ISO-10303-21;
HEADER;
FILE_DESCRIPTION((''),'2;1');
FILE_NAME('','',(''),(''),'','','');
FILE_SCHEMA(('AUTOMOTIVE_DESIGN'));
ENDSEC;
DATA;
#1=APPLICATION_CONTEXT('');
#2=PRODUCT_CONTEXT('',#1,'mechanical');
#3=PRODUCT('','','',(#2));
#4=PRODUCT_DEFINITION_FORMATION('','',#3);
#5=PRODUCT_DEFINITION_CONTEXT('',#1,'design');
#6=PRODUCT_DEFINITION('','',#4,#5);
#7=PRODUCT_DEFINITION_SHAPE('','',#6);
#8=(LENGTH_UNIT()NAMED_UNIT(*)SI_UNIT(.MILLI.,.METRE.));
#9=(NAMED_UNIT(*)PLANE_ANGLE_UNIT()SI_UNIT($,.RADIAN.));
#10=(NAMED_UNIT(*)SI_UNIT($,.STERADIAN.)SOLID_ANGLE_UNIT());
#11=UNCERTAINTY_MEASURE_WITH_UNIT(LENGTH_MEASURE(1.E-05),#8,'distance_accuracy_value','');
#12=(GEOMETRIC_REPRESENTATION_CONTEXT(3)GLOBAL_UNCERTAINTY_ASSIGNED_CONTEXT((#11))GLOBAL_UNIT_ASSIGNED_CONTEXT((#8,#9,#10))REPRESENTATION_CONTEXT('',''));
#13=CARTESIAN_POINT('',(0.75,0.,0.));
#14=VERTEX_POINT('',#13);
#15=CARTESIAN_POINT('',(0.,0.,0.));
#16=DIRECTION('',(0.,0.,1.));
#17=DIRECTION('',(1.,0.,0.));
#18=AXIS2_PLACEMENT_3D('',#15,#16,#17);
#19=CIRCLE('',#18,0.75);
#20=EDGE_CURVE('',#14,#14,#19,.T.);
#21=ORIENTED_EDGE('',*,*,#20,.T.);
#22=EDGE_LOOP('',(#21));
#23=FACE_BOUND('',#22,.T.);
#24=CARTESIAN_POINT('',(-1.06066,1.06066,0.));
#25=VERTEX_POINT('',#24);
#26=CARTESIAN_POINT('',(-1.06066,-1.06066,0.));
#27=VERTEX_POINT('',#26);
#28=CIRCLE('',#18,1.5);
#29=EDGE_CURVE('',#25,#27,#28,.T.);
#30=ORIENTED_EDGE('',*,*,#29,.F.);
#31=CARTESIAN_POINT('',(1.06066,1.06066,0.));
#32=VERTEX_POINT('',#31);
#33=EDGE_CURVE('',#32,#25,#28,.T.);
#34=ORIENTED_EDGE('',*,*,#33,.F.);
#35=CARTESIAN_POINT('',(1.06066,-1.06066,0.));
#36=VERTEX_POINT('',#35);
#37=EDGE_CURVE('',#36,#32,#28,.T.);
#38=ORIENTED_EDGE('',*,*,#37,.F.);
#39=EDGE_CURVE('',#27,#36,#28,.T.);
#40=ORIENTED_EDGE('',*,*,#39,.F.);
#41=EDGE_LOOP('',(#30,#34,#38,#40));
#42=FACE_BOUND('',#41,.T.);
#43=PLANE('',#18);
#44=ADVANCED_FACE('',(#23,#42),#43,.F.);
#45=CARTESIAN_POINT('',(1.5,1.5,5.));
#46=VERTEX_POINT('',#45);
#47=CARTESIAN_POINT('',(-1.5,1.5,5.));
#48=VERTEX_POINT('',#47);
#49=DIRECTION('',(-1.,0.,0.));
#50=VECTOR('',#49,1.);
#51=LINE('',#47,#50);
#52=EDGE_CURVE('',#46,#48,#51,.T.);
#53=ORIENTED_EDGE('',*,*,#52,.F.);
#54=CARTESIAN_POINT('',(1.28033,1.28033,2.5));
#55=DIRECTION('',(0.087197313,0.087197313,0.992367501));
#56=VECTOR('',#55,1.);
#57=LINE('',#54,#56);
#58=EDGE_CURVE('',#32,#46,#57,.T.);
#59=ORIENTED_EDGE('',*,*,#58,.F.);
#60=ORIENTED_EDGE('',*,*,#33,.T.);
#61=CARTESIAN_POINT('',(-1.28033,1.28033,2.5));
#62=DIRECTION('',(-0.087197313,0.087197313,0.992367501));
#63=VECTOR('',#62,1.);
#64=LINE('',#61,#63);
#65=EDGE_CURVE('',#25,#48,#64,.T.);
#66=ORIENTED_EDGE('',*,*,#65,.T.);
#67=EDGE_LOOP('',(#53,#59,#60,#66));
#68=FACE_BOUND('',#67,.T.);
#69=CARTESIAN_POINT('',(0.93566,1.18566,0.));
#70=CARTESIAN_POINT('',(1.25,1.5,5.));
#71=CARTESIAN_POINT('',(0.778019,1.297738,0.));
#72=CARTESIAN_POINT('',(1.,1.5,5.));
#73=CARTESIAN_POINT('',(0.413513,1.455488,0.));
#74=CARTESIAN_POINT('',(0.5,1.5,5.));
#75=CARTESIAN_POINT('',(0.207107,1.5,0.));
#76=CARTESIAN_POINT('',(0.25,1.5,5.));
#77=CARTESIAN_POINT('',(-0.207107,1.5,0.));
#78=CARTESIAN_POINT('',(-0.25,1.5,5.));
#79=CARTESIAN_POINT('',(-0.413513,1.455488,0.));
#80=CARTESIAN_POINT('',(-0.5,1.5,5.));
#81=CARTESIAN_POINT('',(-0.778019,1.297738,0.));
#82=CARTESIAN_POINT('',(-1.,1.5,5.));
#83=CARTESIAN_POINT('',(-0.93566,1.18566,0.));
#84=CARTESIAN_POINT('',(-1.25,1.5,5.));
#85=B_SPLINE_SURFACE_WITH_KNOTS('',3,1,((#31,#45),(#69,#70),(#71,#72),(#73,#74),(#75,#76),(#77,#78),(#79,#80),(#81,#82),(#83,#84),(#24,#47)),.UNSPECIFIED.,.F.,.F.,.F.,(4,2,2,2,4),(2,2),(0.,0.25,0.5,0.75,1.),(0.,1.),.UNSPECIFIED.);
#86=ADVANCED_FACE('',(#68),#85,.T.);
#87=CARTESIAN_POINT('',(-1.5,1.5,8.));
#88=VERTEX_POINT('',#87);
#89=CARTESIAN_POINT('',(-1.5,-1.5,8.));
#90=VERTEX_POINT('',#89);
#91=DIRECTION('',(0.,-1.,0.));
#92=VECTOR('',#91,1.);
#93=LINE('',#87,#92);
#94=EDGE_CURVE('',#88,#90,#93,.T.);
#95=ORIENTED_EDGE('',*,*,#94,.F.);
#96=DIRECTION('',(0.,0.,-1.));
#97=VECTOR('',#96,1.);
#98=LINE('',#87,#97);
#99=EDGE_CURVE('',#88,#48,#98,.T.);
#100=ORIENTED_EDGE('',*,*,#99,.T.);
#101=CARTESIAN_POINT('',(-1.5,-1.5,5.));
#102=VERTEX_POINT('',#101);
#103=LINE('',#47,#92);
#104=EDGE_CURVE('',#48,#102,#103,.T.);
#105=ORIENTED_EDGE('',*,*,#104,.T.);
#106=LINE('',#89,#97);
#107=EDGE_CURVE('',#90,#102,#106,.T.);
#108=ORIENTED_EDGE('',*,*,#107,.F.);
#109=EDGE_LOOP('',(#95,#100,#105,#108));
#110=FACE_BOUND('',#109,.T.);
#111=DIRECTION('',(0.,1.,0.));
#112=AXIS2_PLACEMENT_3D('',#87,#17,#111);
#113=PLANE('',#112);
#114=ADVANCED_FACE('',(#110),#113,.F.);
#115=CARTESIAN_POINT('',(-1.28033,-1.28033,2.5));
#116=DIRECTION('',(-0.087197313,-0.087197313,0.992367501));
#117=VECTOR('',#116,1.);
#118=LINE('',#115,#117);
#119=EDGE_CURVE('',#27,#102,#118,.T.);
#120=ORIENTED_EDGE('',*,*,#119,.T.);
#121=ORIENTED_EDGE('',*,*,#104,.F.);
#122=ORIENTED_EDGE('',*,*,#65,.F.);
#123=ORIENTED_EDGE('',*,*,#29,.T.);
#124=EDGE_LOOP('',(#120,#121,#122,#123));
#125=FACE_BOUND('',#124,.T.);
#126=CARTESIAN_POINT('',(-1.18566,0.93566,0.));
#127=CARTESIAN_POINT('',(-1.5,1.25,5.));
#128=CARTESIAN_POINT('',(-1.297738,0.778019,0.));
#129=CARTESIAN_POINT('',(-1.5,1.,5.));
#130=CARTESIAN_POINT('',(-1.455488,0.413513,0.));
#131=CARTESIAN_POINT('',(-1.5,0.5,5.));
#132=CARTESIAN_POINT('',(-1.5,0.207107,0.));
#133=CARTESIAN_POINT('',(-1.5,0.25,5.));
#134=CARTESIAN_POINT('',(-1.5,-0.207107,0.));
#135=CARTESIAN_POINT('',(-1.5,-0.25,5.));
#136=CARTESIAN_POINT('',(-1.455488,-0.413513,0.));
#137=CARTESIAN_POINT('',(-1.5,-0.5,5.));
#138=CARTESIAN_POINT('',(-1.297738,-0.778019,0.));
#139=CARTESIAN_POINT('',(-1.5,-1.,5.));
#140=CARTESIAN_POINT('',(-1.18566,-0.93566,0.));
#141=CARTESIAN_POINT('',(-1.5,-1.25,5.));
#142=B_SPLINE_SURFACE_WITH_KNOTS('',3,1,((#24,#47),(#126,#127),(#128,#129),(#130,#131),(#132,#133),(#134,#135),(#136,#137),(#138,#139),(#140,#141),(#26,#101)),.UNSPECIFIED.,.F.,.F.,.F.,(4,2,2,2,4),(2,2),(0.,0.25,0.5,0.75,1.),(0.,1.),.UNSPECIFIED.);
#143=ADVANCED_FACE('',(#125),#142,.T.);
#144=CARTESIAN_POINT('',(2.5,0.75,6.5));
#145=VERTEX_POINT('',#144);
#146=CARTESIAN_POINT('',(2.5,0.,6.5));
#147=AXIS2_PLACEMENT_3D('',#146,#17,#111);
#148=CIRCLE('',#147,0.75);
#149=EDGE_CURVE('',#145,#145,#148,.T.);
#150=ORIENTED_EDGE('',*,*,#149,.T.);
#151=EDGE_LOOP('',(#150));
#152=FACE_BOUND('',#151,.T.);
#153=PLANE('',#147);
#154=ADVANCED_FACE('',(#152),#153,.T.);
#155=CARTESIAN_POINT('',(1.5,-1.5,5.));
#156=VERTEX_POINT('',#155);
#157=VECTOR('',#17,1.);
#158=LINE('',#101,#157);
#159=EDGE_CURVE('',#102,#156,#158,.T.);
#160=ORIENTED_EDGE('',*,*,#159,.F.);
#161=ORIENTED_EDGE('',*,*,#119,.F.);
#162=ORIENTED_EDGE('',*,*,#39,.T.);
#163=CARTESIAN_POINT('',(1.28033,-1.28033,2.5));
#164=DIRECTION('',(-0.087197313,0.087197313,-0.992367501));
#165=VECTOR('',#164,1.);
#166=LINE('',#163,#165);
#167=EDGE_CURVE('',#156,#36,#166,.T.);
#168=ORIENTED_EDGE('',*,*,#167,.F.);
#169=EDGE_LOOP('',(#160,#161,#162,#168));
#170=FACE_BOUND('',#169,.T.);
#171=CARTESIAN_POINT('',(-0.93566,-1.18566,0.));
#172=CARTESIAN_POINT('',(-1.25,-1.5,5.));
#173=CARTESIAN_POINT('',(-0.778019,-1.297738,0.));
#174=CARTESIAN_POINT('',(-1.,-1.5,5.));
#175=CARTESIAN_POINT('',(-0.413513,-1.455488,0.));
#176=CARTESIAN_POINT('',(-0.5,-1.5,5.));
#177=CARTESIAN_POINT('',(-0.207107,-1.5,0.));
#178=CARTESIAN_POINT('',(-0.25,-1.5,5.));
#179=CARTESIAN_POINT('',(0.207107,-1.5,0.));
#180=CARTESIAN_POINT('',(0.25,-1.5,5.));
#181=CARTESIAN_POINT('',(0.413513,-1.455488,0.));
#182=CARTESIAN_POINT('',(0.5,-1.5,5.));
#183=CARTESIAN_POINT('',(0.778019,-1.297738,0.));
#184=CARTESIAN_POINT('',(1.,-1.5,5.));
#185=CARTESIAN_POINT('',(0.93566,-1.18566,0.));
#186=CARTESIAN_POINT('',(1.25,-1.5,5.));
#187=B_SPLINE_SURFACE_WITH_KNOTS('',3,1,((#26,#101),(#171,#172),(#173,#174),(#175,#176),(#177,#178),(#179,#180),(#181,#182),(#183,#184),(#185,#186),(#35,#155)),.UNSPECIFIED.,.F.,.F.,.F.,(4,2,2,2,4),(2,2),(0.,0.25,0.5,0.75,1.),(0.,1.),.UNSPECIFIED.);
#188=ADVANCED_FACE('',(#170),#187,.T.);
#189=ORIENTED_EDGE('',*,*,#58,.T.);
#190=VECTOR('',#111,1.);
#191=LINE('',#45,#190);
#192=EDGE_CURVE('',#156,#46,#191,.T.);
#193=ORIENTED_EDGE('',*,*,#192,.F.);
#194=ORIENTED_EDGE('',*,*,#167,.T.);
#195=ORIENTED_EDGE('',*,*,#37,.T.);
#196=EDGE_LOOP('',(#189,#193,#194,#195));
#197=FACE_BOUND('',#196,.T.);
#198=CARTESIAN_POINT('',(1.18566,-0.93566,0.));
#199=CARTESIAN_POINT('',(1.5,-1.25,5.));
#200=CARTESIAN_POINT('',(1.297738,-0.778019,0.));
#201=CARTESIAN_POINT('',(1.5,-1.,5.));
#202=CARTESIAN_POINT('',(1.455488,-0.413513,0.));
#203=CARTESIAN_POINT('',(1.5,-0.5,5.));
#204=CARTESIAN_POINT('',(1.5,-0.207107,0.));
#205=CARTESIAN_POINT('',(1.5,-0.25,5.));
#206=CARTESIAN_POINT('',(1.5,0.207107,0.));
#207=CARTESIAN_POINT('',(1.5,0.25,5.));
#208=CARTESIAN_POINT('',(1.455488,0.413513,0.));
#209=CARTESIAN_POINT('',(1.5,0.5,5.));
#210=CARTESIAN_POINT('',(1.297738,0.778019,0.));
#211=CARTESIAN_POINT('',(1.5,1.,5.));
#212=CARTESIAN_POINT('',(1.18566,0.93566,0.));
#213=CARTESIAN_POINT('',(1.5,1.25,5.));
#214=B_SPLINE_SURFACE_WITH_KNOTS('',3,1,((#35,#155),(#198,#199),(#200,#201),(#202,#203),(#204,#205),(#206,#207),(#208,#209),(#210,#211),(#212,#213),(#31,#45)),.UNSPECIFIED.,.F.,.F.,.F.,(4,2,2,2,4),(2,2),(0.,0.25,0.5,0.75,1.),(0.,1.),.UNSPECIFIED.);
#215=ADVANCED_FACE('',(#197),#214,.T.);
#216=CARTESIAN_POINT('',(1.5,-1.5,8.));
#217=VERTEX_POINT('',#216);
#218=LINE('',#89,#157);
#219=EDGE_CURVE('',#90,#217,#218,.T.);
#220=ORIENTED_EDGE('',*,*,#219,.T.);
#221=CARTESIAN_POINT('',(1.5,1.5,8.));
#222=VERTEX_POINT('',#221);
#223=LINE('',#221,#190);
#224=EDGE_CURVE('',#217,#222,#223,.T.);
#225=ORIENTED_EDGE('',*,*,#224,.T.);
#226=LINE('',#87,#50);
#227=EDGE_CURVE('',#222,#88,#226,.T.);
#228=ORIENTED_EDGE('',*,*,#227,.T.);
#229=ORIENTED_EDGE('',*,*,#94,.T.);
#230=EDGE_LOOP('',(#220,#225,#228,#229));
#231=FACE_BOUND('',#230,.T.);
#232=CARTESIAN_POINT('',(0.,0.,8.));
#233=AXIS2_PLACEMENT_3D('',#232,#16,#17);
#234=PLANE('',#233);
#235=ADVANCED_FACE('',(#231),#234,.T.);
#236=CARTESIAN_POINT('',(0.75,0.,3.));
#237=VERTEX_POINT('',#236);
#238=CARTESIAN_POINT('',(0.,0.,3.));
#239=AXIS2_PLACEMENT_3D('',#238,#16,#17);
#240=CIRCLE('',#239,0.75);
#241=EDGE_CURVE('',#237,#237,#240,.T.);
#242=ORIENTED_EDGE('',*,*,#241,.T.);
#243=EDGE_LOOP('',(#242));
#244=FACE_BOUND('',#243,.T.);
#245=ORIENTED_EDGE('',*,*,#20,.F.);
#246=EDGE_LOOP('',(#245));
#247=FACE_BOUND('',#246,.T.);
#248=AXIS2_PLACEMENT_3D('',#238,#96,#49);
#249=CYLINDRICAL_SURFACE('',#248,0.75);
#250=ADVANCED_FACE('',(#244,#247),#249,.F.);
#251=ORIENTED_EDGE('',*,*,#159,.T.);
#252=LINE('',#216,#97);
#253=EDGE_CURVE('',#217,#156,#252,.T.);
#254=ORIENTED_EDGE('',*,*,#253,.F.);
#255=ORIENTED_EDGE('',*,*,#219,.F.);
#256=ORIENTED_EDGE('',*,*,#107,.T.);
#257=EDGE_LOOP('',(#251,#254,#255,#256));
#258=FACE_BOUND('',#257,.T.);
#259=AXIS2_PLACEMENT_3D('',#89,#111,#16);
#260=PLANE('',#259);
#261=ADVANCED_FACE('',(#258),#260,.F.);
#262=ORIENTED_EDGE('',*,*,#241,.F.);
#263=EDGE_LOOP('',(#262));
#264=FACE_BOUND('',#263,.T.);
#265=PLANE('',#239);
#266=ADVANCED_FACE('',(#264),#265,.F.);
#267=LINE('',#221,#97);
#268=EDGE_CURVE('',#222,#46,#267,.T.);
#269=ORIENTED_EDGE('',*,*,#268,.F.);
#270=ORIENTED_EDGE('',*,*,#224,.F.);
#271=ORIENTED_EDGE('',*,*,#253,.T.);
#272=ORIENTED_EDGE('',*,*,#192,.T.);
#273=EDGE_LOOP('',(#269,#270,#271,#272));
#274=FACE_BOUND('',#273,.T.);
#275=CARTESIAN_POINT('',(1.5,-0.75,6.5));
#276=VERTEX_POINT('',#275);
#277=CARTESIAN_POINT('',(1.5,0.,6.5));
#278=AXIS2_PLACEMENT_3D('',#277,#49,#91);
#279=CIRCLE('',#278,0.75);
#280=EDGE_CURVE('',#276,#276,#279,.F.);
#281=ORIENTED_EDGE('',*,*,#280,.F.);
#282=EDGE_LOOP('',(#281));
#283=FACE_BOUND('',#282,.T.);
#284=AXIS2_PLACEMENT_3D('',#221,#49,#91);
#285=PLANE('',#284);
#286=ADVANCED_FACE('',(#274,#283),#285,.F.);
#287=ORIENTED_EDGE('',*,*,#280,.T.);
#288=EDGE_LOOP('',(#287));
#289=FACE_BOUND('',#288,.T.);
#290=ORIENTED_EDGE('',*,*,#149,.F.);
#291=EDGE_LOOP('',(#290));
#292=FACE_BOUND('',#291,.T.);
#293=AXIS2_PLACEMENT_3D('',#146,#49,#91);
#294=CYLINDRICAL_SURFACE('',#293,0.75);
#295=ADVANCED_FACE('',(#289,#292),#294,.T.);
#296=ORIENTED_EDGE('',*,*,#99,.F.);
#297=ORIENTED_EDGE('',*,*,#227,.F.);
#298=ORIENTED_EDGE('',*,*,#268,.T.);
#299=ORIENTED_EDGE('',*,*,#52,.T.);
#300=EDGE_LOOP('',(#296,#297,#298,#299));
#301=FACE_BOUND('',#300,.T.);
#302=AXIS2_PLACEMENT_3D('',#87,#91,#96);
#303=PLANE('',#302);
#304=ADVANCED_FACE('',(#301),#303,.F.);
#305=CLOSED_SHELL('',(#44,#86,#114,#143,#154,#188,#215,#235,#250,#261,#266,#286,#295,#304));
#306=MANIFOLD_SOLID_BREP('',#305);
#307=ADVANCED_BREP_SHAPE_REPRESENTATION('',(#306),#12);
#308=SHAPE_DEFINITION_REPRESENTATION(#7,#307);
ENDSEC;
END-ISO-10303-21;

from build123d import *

# Parameters (mm, degrees)
SKETCH1_8_R         = 0.75
CUT_EXTRUDE3_DEPTH  = 3
SKETCH3_2_W         = 3
SKETCH3_2_H         = 3
BOSS_EXTRUDE3_DEPTH = 3
SKETCH5_R           = 0.75
BOSS_EXTRUDE4_DEPTH = 1


with BuildPart() as part:
    # Loft2: read off the stored shape, not the designer's step
    # Loft2: loft between two sections, ruled curve by curve
    loft2_from = [
        Edge.make_bspline([(1.060660172, -1.060660172, 0), (1.185660172, -0.935660172, 0), (1.297737894, -0.778019164, 0), (1.45548774, -0.413512879, 0), (1.5, -0.207106781, 0), (1.5, 0.207106781, 0), (1.45548774, 0.413512879, 0), (1.297737894, 0.778019164, 0), (1.185660172, 0.935660172, 0), (1.060660172, 1.060660172, 0)], [0, 0, 0, 0, 0.25, 0.25, 0.5, 0.5, 0.75, 0.75, 1, 1, 1, 1], 3),
        Edge.make_bspline([(1.060660172, 1.060660172, 0), (0.935660172, 1.185660172, 0), (0.778019164, 1.297737894, 0), (0.413512879, 1.45548774, 0), (0.207106781, 1.5, 0), (-0.207106781, 1.5, 0), (-0.413512879, 1.45548774, 0), (-0.778019164, 1.297737894, 0), (-0.935660172, 1.185660172, 0), (-1.060660172, 1.060660172, 0)], [0, 0, 0, 0, 0.25, 0.25, 0.5, 0.5, 0.75, 0.75, 1, 1, 1, 1], 3),
        Edge.make_bspline([(-1.060660172, -1.060660172, 0), (-0.935660172, -1.185660172, 0), (-0.778019164, -1.297737894, 0), (-0.413512879, -1.45548774, 0), (-0.207106781, -1.5, 0), (0.207106781, -1.5, 0), (0.413512879, -1.45548774, 0), (0.778019164, -1.297737894, 0), (0.935660172, -1.185660172, 0), (1.060660172, -1.060660172, 0)], [0, 0, 0, 0, 0.25, 0.25, 0.5, 0.5, 0.75, 0.75, 1, 1, 1, 1], 3),
        Edge.make_bspline([(-1.060660172, 1.060660172, 0), (-1.185660172, 0.935660172, 0), (-1.297737894, 0.778019164, 0), (-1.45548774, 0.413512879, 0), (-1.5, 0.207106781, 0), (-1.5, -0.207106781, 0), (-1.45548774, -0.413512879, 0), (-1.297737894, -0.778019164, 0), (-1.185660172, -0.935660172, 0), (-1.060660172, -1.060660172, 0)], [0, 0, 0, 0, 0.25, 0.25, 0.5, 0.5, 0.75, 0.75, 1, 1, 1, 1], 3),
    ]
    loft2_to = [
        Edge.make_bspline([(1.5, -1.5, 5), (1.5, -1.25, 5), (1.5, -1, 5), (1.5, -0.5, 5), (1.5, -0.25, 5), (1.5, 0.25, 5), (1.5, 0.5, 5), (1.5, 1, 5), (1.5, 1.25, 5), (1.5, 1.5, 5)], [0, 0, 0, 0, 0.25, 0.25, 0.5, 0.5, 0.75, 0.75, 1, 1, 1, 1], 3),
        Edge.make_bspline([(1.5, 1.5, 5), (1.25, 1.5, 5), (1, 1.5, 5), (0.5, 1.5, 5), (0.25, 1.5, 5), (-0.25, 1.5, 5), (-0.5, 1.5, 5), (-1, 1.5, 5), (-1.25, 1.5, 5), (-1.5, 1.5, 5)], [0, 0, 0, 0, 0.25, 0.25, 0.5, 0.5, 0.75, 0.75, 1, 1, 1, 1], 3),
        Edge.make_bspline([(-1.5, -1.5, 5), (-1.25, -1.5, 5), (-1, -1.5, 5), (-0.5, -1.5, 5), (-0.25, -1.5, 5), (0.25, -1.5, 5), (0.5, -1.5, 5), (1, -1.5, 5), (1.25, -1.5, 5), (1.5, -1.5, 5)], [0, 0, 0, 0, 0.25, 0.25, 0.5, 0.5, 0.75, 0.75, 1, 1, 1, 1], 3),
        Edge.make_bspline([(-1.5, 1.5, 5), (-1.5, 1.25, 5), (-1.5, 1, 5), (-1.5, 0.5, 5), (-1.5, 0.25, 5), (-1.5, -0.25, 5), (-1.5, -0.5, 5), (-1.5, -1, 5), (-1.5, -1.25, 5), (-1.5, -1.5, 5)], [0, 0, 0, 0, 0.25, 0.25, 0.5, 0.5, 0.75, 0.75, 1, 1, 1, 1], 3),
    ]
    loft2 = Solid(Shell([*[Face.make_surface_from_curves(loft2_from[k], loft2_to[k]) for k in range(4)], Face(Wire(loft2_from)), Face(Wire(loft2_to))]))
    add(loft2)

    # Sketch1<8> → Cut-Extrude3 (cut)
    with BuildSketch(Plane.XY):
        Circle(SKETCH1_8_R)
    extrude(amount=CUT_EXTRUDE3_DEPTH, mode=Mode.SUBTRACT)

    # Sketch3<2> → Boss-Extrude3 (add)
    with BuildSketch(Plane.XY.offset(5)):
        Rectangle(SKETCH3_2_W, SKETCH3_2_H)
    extrude(amount=BOSS_EXTRUDE3_DEPTH)

    # Sketch5 → Boss-Extrude4 (add)
    with BuildSketch(Plane(origin=(1.5, 0, 0), x_dir=(0, 0, -1), z_dir=(1, 0, 0))):
        with Locations(Location((-6.5, 0, 0), (0, 0, 270))):
            Circle(SKETCH5_R)
    extrude(amount=BOSS_EXTRUDE4_DEPTH)


solid = part.part
